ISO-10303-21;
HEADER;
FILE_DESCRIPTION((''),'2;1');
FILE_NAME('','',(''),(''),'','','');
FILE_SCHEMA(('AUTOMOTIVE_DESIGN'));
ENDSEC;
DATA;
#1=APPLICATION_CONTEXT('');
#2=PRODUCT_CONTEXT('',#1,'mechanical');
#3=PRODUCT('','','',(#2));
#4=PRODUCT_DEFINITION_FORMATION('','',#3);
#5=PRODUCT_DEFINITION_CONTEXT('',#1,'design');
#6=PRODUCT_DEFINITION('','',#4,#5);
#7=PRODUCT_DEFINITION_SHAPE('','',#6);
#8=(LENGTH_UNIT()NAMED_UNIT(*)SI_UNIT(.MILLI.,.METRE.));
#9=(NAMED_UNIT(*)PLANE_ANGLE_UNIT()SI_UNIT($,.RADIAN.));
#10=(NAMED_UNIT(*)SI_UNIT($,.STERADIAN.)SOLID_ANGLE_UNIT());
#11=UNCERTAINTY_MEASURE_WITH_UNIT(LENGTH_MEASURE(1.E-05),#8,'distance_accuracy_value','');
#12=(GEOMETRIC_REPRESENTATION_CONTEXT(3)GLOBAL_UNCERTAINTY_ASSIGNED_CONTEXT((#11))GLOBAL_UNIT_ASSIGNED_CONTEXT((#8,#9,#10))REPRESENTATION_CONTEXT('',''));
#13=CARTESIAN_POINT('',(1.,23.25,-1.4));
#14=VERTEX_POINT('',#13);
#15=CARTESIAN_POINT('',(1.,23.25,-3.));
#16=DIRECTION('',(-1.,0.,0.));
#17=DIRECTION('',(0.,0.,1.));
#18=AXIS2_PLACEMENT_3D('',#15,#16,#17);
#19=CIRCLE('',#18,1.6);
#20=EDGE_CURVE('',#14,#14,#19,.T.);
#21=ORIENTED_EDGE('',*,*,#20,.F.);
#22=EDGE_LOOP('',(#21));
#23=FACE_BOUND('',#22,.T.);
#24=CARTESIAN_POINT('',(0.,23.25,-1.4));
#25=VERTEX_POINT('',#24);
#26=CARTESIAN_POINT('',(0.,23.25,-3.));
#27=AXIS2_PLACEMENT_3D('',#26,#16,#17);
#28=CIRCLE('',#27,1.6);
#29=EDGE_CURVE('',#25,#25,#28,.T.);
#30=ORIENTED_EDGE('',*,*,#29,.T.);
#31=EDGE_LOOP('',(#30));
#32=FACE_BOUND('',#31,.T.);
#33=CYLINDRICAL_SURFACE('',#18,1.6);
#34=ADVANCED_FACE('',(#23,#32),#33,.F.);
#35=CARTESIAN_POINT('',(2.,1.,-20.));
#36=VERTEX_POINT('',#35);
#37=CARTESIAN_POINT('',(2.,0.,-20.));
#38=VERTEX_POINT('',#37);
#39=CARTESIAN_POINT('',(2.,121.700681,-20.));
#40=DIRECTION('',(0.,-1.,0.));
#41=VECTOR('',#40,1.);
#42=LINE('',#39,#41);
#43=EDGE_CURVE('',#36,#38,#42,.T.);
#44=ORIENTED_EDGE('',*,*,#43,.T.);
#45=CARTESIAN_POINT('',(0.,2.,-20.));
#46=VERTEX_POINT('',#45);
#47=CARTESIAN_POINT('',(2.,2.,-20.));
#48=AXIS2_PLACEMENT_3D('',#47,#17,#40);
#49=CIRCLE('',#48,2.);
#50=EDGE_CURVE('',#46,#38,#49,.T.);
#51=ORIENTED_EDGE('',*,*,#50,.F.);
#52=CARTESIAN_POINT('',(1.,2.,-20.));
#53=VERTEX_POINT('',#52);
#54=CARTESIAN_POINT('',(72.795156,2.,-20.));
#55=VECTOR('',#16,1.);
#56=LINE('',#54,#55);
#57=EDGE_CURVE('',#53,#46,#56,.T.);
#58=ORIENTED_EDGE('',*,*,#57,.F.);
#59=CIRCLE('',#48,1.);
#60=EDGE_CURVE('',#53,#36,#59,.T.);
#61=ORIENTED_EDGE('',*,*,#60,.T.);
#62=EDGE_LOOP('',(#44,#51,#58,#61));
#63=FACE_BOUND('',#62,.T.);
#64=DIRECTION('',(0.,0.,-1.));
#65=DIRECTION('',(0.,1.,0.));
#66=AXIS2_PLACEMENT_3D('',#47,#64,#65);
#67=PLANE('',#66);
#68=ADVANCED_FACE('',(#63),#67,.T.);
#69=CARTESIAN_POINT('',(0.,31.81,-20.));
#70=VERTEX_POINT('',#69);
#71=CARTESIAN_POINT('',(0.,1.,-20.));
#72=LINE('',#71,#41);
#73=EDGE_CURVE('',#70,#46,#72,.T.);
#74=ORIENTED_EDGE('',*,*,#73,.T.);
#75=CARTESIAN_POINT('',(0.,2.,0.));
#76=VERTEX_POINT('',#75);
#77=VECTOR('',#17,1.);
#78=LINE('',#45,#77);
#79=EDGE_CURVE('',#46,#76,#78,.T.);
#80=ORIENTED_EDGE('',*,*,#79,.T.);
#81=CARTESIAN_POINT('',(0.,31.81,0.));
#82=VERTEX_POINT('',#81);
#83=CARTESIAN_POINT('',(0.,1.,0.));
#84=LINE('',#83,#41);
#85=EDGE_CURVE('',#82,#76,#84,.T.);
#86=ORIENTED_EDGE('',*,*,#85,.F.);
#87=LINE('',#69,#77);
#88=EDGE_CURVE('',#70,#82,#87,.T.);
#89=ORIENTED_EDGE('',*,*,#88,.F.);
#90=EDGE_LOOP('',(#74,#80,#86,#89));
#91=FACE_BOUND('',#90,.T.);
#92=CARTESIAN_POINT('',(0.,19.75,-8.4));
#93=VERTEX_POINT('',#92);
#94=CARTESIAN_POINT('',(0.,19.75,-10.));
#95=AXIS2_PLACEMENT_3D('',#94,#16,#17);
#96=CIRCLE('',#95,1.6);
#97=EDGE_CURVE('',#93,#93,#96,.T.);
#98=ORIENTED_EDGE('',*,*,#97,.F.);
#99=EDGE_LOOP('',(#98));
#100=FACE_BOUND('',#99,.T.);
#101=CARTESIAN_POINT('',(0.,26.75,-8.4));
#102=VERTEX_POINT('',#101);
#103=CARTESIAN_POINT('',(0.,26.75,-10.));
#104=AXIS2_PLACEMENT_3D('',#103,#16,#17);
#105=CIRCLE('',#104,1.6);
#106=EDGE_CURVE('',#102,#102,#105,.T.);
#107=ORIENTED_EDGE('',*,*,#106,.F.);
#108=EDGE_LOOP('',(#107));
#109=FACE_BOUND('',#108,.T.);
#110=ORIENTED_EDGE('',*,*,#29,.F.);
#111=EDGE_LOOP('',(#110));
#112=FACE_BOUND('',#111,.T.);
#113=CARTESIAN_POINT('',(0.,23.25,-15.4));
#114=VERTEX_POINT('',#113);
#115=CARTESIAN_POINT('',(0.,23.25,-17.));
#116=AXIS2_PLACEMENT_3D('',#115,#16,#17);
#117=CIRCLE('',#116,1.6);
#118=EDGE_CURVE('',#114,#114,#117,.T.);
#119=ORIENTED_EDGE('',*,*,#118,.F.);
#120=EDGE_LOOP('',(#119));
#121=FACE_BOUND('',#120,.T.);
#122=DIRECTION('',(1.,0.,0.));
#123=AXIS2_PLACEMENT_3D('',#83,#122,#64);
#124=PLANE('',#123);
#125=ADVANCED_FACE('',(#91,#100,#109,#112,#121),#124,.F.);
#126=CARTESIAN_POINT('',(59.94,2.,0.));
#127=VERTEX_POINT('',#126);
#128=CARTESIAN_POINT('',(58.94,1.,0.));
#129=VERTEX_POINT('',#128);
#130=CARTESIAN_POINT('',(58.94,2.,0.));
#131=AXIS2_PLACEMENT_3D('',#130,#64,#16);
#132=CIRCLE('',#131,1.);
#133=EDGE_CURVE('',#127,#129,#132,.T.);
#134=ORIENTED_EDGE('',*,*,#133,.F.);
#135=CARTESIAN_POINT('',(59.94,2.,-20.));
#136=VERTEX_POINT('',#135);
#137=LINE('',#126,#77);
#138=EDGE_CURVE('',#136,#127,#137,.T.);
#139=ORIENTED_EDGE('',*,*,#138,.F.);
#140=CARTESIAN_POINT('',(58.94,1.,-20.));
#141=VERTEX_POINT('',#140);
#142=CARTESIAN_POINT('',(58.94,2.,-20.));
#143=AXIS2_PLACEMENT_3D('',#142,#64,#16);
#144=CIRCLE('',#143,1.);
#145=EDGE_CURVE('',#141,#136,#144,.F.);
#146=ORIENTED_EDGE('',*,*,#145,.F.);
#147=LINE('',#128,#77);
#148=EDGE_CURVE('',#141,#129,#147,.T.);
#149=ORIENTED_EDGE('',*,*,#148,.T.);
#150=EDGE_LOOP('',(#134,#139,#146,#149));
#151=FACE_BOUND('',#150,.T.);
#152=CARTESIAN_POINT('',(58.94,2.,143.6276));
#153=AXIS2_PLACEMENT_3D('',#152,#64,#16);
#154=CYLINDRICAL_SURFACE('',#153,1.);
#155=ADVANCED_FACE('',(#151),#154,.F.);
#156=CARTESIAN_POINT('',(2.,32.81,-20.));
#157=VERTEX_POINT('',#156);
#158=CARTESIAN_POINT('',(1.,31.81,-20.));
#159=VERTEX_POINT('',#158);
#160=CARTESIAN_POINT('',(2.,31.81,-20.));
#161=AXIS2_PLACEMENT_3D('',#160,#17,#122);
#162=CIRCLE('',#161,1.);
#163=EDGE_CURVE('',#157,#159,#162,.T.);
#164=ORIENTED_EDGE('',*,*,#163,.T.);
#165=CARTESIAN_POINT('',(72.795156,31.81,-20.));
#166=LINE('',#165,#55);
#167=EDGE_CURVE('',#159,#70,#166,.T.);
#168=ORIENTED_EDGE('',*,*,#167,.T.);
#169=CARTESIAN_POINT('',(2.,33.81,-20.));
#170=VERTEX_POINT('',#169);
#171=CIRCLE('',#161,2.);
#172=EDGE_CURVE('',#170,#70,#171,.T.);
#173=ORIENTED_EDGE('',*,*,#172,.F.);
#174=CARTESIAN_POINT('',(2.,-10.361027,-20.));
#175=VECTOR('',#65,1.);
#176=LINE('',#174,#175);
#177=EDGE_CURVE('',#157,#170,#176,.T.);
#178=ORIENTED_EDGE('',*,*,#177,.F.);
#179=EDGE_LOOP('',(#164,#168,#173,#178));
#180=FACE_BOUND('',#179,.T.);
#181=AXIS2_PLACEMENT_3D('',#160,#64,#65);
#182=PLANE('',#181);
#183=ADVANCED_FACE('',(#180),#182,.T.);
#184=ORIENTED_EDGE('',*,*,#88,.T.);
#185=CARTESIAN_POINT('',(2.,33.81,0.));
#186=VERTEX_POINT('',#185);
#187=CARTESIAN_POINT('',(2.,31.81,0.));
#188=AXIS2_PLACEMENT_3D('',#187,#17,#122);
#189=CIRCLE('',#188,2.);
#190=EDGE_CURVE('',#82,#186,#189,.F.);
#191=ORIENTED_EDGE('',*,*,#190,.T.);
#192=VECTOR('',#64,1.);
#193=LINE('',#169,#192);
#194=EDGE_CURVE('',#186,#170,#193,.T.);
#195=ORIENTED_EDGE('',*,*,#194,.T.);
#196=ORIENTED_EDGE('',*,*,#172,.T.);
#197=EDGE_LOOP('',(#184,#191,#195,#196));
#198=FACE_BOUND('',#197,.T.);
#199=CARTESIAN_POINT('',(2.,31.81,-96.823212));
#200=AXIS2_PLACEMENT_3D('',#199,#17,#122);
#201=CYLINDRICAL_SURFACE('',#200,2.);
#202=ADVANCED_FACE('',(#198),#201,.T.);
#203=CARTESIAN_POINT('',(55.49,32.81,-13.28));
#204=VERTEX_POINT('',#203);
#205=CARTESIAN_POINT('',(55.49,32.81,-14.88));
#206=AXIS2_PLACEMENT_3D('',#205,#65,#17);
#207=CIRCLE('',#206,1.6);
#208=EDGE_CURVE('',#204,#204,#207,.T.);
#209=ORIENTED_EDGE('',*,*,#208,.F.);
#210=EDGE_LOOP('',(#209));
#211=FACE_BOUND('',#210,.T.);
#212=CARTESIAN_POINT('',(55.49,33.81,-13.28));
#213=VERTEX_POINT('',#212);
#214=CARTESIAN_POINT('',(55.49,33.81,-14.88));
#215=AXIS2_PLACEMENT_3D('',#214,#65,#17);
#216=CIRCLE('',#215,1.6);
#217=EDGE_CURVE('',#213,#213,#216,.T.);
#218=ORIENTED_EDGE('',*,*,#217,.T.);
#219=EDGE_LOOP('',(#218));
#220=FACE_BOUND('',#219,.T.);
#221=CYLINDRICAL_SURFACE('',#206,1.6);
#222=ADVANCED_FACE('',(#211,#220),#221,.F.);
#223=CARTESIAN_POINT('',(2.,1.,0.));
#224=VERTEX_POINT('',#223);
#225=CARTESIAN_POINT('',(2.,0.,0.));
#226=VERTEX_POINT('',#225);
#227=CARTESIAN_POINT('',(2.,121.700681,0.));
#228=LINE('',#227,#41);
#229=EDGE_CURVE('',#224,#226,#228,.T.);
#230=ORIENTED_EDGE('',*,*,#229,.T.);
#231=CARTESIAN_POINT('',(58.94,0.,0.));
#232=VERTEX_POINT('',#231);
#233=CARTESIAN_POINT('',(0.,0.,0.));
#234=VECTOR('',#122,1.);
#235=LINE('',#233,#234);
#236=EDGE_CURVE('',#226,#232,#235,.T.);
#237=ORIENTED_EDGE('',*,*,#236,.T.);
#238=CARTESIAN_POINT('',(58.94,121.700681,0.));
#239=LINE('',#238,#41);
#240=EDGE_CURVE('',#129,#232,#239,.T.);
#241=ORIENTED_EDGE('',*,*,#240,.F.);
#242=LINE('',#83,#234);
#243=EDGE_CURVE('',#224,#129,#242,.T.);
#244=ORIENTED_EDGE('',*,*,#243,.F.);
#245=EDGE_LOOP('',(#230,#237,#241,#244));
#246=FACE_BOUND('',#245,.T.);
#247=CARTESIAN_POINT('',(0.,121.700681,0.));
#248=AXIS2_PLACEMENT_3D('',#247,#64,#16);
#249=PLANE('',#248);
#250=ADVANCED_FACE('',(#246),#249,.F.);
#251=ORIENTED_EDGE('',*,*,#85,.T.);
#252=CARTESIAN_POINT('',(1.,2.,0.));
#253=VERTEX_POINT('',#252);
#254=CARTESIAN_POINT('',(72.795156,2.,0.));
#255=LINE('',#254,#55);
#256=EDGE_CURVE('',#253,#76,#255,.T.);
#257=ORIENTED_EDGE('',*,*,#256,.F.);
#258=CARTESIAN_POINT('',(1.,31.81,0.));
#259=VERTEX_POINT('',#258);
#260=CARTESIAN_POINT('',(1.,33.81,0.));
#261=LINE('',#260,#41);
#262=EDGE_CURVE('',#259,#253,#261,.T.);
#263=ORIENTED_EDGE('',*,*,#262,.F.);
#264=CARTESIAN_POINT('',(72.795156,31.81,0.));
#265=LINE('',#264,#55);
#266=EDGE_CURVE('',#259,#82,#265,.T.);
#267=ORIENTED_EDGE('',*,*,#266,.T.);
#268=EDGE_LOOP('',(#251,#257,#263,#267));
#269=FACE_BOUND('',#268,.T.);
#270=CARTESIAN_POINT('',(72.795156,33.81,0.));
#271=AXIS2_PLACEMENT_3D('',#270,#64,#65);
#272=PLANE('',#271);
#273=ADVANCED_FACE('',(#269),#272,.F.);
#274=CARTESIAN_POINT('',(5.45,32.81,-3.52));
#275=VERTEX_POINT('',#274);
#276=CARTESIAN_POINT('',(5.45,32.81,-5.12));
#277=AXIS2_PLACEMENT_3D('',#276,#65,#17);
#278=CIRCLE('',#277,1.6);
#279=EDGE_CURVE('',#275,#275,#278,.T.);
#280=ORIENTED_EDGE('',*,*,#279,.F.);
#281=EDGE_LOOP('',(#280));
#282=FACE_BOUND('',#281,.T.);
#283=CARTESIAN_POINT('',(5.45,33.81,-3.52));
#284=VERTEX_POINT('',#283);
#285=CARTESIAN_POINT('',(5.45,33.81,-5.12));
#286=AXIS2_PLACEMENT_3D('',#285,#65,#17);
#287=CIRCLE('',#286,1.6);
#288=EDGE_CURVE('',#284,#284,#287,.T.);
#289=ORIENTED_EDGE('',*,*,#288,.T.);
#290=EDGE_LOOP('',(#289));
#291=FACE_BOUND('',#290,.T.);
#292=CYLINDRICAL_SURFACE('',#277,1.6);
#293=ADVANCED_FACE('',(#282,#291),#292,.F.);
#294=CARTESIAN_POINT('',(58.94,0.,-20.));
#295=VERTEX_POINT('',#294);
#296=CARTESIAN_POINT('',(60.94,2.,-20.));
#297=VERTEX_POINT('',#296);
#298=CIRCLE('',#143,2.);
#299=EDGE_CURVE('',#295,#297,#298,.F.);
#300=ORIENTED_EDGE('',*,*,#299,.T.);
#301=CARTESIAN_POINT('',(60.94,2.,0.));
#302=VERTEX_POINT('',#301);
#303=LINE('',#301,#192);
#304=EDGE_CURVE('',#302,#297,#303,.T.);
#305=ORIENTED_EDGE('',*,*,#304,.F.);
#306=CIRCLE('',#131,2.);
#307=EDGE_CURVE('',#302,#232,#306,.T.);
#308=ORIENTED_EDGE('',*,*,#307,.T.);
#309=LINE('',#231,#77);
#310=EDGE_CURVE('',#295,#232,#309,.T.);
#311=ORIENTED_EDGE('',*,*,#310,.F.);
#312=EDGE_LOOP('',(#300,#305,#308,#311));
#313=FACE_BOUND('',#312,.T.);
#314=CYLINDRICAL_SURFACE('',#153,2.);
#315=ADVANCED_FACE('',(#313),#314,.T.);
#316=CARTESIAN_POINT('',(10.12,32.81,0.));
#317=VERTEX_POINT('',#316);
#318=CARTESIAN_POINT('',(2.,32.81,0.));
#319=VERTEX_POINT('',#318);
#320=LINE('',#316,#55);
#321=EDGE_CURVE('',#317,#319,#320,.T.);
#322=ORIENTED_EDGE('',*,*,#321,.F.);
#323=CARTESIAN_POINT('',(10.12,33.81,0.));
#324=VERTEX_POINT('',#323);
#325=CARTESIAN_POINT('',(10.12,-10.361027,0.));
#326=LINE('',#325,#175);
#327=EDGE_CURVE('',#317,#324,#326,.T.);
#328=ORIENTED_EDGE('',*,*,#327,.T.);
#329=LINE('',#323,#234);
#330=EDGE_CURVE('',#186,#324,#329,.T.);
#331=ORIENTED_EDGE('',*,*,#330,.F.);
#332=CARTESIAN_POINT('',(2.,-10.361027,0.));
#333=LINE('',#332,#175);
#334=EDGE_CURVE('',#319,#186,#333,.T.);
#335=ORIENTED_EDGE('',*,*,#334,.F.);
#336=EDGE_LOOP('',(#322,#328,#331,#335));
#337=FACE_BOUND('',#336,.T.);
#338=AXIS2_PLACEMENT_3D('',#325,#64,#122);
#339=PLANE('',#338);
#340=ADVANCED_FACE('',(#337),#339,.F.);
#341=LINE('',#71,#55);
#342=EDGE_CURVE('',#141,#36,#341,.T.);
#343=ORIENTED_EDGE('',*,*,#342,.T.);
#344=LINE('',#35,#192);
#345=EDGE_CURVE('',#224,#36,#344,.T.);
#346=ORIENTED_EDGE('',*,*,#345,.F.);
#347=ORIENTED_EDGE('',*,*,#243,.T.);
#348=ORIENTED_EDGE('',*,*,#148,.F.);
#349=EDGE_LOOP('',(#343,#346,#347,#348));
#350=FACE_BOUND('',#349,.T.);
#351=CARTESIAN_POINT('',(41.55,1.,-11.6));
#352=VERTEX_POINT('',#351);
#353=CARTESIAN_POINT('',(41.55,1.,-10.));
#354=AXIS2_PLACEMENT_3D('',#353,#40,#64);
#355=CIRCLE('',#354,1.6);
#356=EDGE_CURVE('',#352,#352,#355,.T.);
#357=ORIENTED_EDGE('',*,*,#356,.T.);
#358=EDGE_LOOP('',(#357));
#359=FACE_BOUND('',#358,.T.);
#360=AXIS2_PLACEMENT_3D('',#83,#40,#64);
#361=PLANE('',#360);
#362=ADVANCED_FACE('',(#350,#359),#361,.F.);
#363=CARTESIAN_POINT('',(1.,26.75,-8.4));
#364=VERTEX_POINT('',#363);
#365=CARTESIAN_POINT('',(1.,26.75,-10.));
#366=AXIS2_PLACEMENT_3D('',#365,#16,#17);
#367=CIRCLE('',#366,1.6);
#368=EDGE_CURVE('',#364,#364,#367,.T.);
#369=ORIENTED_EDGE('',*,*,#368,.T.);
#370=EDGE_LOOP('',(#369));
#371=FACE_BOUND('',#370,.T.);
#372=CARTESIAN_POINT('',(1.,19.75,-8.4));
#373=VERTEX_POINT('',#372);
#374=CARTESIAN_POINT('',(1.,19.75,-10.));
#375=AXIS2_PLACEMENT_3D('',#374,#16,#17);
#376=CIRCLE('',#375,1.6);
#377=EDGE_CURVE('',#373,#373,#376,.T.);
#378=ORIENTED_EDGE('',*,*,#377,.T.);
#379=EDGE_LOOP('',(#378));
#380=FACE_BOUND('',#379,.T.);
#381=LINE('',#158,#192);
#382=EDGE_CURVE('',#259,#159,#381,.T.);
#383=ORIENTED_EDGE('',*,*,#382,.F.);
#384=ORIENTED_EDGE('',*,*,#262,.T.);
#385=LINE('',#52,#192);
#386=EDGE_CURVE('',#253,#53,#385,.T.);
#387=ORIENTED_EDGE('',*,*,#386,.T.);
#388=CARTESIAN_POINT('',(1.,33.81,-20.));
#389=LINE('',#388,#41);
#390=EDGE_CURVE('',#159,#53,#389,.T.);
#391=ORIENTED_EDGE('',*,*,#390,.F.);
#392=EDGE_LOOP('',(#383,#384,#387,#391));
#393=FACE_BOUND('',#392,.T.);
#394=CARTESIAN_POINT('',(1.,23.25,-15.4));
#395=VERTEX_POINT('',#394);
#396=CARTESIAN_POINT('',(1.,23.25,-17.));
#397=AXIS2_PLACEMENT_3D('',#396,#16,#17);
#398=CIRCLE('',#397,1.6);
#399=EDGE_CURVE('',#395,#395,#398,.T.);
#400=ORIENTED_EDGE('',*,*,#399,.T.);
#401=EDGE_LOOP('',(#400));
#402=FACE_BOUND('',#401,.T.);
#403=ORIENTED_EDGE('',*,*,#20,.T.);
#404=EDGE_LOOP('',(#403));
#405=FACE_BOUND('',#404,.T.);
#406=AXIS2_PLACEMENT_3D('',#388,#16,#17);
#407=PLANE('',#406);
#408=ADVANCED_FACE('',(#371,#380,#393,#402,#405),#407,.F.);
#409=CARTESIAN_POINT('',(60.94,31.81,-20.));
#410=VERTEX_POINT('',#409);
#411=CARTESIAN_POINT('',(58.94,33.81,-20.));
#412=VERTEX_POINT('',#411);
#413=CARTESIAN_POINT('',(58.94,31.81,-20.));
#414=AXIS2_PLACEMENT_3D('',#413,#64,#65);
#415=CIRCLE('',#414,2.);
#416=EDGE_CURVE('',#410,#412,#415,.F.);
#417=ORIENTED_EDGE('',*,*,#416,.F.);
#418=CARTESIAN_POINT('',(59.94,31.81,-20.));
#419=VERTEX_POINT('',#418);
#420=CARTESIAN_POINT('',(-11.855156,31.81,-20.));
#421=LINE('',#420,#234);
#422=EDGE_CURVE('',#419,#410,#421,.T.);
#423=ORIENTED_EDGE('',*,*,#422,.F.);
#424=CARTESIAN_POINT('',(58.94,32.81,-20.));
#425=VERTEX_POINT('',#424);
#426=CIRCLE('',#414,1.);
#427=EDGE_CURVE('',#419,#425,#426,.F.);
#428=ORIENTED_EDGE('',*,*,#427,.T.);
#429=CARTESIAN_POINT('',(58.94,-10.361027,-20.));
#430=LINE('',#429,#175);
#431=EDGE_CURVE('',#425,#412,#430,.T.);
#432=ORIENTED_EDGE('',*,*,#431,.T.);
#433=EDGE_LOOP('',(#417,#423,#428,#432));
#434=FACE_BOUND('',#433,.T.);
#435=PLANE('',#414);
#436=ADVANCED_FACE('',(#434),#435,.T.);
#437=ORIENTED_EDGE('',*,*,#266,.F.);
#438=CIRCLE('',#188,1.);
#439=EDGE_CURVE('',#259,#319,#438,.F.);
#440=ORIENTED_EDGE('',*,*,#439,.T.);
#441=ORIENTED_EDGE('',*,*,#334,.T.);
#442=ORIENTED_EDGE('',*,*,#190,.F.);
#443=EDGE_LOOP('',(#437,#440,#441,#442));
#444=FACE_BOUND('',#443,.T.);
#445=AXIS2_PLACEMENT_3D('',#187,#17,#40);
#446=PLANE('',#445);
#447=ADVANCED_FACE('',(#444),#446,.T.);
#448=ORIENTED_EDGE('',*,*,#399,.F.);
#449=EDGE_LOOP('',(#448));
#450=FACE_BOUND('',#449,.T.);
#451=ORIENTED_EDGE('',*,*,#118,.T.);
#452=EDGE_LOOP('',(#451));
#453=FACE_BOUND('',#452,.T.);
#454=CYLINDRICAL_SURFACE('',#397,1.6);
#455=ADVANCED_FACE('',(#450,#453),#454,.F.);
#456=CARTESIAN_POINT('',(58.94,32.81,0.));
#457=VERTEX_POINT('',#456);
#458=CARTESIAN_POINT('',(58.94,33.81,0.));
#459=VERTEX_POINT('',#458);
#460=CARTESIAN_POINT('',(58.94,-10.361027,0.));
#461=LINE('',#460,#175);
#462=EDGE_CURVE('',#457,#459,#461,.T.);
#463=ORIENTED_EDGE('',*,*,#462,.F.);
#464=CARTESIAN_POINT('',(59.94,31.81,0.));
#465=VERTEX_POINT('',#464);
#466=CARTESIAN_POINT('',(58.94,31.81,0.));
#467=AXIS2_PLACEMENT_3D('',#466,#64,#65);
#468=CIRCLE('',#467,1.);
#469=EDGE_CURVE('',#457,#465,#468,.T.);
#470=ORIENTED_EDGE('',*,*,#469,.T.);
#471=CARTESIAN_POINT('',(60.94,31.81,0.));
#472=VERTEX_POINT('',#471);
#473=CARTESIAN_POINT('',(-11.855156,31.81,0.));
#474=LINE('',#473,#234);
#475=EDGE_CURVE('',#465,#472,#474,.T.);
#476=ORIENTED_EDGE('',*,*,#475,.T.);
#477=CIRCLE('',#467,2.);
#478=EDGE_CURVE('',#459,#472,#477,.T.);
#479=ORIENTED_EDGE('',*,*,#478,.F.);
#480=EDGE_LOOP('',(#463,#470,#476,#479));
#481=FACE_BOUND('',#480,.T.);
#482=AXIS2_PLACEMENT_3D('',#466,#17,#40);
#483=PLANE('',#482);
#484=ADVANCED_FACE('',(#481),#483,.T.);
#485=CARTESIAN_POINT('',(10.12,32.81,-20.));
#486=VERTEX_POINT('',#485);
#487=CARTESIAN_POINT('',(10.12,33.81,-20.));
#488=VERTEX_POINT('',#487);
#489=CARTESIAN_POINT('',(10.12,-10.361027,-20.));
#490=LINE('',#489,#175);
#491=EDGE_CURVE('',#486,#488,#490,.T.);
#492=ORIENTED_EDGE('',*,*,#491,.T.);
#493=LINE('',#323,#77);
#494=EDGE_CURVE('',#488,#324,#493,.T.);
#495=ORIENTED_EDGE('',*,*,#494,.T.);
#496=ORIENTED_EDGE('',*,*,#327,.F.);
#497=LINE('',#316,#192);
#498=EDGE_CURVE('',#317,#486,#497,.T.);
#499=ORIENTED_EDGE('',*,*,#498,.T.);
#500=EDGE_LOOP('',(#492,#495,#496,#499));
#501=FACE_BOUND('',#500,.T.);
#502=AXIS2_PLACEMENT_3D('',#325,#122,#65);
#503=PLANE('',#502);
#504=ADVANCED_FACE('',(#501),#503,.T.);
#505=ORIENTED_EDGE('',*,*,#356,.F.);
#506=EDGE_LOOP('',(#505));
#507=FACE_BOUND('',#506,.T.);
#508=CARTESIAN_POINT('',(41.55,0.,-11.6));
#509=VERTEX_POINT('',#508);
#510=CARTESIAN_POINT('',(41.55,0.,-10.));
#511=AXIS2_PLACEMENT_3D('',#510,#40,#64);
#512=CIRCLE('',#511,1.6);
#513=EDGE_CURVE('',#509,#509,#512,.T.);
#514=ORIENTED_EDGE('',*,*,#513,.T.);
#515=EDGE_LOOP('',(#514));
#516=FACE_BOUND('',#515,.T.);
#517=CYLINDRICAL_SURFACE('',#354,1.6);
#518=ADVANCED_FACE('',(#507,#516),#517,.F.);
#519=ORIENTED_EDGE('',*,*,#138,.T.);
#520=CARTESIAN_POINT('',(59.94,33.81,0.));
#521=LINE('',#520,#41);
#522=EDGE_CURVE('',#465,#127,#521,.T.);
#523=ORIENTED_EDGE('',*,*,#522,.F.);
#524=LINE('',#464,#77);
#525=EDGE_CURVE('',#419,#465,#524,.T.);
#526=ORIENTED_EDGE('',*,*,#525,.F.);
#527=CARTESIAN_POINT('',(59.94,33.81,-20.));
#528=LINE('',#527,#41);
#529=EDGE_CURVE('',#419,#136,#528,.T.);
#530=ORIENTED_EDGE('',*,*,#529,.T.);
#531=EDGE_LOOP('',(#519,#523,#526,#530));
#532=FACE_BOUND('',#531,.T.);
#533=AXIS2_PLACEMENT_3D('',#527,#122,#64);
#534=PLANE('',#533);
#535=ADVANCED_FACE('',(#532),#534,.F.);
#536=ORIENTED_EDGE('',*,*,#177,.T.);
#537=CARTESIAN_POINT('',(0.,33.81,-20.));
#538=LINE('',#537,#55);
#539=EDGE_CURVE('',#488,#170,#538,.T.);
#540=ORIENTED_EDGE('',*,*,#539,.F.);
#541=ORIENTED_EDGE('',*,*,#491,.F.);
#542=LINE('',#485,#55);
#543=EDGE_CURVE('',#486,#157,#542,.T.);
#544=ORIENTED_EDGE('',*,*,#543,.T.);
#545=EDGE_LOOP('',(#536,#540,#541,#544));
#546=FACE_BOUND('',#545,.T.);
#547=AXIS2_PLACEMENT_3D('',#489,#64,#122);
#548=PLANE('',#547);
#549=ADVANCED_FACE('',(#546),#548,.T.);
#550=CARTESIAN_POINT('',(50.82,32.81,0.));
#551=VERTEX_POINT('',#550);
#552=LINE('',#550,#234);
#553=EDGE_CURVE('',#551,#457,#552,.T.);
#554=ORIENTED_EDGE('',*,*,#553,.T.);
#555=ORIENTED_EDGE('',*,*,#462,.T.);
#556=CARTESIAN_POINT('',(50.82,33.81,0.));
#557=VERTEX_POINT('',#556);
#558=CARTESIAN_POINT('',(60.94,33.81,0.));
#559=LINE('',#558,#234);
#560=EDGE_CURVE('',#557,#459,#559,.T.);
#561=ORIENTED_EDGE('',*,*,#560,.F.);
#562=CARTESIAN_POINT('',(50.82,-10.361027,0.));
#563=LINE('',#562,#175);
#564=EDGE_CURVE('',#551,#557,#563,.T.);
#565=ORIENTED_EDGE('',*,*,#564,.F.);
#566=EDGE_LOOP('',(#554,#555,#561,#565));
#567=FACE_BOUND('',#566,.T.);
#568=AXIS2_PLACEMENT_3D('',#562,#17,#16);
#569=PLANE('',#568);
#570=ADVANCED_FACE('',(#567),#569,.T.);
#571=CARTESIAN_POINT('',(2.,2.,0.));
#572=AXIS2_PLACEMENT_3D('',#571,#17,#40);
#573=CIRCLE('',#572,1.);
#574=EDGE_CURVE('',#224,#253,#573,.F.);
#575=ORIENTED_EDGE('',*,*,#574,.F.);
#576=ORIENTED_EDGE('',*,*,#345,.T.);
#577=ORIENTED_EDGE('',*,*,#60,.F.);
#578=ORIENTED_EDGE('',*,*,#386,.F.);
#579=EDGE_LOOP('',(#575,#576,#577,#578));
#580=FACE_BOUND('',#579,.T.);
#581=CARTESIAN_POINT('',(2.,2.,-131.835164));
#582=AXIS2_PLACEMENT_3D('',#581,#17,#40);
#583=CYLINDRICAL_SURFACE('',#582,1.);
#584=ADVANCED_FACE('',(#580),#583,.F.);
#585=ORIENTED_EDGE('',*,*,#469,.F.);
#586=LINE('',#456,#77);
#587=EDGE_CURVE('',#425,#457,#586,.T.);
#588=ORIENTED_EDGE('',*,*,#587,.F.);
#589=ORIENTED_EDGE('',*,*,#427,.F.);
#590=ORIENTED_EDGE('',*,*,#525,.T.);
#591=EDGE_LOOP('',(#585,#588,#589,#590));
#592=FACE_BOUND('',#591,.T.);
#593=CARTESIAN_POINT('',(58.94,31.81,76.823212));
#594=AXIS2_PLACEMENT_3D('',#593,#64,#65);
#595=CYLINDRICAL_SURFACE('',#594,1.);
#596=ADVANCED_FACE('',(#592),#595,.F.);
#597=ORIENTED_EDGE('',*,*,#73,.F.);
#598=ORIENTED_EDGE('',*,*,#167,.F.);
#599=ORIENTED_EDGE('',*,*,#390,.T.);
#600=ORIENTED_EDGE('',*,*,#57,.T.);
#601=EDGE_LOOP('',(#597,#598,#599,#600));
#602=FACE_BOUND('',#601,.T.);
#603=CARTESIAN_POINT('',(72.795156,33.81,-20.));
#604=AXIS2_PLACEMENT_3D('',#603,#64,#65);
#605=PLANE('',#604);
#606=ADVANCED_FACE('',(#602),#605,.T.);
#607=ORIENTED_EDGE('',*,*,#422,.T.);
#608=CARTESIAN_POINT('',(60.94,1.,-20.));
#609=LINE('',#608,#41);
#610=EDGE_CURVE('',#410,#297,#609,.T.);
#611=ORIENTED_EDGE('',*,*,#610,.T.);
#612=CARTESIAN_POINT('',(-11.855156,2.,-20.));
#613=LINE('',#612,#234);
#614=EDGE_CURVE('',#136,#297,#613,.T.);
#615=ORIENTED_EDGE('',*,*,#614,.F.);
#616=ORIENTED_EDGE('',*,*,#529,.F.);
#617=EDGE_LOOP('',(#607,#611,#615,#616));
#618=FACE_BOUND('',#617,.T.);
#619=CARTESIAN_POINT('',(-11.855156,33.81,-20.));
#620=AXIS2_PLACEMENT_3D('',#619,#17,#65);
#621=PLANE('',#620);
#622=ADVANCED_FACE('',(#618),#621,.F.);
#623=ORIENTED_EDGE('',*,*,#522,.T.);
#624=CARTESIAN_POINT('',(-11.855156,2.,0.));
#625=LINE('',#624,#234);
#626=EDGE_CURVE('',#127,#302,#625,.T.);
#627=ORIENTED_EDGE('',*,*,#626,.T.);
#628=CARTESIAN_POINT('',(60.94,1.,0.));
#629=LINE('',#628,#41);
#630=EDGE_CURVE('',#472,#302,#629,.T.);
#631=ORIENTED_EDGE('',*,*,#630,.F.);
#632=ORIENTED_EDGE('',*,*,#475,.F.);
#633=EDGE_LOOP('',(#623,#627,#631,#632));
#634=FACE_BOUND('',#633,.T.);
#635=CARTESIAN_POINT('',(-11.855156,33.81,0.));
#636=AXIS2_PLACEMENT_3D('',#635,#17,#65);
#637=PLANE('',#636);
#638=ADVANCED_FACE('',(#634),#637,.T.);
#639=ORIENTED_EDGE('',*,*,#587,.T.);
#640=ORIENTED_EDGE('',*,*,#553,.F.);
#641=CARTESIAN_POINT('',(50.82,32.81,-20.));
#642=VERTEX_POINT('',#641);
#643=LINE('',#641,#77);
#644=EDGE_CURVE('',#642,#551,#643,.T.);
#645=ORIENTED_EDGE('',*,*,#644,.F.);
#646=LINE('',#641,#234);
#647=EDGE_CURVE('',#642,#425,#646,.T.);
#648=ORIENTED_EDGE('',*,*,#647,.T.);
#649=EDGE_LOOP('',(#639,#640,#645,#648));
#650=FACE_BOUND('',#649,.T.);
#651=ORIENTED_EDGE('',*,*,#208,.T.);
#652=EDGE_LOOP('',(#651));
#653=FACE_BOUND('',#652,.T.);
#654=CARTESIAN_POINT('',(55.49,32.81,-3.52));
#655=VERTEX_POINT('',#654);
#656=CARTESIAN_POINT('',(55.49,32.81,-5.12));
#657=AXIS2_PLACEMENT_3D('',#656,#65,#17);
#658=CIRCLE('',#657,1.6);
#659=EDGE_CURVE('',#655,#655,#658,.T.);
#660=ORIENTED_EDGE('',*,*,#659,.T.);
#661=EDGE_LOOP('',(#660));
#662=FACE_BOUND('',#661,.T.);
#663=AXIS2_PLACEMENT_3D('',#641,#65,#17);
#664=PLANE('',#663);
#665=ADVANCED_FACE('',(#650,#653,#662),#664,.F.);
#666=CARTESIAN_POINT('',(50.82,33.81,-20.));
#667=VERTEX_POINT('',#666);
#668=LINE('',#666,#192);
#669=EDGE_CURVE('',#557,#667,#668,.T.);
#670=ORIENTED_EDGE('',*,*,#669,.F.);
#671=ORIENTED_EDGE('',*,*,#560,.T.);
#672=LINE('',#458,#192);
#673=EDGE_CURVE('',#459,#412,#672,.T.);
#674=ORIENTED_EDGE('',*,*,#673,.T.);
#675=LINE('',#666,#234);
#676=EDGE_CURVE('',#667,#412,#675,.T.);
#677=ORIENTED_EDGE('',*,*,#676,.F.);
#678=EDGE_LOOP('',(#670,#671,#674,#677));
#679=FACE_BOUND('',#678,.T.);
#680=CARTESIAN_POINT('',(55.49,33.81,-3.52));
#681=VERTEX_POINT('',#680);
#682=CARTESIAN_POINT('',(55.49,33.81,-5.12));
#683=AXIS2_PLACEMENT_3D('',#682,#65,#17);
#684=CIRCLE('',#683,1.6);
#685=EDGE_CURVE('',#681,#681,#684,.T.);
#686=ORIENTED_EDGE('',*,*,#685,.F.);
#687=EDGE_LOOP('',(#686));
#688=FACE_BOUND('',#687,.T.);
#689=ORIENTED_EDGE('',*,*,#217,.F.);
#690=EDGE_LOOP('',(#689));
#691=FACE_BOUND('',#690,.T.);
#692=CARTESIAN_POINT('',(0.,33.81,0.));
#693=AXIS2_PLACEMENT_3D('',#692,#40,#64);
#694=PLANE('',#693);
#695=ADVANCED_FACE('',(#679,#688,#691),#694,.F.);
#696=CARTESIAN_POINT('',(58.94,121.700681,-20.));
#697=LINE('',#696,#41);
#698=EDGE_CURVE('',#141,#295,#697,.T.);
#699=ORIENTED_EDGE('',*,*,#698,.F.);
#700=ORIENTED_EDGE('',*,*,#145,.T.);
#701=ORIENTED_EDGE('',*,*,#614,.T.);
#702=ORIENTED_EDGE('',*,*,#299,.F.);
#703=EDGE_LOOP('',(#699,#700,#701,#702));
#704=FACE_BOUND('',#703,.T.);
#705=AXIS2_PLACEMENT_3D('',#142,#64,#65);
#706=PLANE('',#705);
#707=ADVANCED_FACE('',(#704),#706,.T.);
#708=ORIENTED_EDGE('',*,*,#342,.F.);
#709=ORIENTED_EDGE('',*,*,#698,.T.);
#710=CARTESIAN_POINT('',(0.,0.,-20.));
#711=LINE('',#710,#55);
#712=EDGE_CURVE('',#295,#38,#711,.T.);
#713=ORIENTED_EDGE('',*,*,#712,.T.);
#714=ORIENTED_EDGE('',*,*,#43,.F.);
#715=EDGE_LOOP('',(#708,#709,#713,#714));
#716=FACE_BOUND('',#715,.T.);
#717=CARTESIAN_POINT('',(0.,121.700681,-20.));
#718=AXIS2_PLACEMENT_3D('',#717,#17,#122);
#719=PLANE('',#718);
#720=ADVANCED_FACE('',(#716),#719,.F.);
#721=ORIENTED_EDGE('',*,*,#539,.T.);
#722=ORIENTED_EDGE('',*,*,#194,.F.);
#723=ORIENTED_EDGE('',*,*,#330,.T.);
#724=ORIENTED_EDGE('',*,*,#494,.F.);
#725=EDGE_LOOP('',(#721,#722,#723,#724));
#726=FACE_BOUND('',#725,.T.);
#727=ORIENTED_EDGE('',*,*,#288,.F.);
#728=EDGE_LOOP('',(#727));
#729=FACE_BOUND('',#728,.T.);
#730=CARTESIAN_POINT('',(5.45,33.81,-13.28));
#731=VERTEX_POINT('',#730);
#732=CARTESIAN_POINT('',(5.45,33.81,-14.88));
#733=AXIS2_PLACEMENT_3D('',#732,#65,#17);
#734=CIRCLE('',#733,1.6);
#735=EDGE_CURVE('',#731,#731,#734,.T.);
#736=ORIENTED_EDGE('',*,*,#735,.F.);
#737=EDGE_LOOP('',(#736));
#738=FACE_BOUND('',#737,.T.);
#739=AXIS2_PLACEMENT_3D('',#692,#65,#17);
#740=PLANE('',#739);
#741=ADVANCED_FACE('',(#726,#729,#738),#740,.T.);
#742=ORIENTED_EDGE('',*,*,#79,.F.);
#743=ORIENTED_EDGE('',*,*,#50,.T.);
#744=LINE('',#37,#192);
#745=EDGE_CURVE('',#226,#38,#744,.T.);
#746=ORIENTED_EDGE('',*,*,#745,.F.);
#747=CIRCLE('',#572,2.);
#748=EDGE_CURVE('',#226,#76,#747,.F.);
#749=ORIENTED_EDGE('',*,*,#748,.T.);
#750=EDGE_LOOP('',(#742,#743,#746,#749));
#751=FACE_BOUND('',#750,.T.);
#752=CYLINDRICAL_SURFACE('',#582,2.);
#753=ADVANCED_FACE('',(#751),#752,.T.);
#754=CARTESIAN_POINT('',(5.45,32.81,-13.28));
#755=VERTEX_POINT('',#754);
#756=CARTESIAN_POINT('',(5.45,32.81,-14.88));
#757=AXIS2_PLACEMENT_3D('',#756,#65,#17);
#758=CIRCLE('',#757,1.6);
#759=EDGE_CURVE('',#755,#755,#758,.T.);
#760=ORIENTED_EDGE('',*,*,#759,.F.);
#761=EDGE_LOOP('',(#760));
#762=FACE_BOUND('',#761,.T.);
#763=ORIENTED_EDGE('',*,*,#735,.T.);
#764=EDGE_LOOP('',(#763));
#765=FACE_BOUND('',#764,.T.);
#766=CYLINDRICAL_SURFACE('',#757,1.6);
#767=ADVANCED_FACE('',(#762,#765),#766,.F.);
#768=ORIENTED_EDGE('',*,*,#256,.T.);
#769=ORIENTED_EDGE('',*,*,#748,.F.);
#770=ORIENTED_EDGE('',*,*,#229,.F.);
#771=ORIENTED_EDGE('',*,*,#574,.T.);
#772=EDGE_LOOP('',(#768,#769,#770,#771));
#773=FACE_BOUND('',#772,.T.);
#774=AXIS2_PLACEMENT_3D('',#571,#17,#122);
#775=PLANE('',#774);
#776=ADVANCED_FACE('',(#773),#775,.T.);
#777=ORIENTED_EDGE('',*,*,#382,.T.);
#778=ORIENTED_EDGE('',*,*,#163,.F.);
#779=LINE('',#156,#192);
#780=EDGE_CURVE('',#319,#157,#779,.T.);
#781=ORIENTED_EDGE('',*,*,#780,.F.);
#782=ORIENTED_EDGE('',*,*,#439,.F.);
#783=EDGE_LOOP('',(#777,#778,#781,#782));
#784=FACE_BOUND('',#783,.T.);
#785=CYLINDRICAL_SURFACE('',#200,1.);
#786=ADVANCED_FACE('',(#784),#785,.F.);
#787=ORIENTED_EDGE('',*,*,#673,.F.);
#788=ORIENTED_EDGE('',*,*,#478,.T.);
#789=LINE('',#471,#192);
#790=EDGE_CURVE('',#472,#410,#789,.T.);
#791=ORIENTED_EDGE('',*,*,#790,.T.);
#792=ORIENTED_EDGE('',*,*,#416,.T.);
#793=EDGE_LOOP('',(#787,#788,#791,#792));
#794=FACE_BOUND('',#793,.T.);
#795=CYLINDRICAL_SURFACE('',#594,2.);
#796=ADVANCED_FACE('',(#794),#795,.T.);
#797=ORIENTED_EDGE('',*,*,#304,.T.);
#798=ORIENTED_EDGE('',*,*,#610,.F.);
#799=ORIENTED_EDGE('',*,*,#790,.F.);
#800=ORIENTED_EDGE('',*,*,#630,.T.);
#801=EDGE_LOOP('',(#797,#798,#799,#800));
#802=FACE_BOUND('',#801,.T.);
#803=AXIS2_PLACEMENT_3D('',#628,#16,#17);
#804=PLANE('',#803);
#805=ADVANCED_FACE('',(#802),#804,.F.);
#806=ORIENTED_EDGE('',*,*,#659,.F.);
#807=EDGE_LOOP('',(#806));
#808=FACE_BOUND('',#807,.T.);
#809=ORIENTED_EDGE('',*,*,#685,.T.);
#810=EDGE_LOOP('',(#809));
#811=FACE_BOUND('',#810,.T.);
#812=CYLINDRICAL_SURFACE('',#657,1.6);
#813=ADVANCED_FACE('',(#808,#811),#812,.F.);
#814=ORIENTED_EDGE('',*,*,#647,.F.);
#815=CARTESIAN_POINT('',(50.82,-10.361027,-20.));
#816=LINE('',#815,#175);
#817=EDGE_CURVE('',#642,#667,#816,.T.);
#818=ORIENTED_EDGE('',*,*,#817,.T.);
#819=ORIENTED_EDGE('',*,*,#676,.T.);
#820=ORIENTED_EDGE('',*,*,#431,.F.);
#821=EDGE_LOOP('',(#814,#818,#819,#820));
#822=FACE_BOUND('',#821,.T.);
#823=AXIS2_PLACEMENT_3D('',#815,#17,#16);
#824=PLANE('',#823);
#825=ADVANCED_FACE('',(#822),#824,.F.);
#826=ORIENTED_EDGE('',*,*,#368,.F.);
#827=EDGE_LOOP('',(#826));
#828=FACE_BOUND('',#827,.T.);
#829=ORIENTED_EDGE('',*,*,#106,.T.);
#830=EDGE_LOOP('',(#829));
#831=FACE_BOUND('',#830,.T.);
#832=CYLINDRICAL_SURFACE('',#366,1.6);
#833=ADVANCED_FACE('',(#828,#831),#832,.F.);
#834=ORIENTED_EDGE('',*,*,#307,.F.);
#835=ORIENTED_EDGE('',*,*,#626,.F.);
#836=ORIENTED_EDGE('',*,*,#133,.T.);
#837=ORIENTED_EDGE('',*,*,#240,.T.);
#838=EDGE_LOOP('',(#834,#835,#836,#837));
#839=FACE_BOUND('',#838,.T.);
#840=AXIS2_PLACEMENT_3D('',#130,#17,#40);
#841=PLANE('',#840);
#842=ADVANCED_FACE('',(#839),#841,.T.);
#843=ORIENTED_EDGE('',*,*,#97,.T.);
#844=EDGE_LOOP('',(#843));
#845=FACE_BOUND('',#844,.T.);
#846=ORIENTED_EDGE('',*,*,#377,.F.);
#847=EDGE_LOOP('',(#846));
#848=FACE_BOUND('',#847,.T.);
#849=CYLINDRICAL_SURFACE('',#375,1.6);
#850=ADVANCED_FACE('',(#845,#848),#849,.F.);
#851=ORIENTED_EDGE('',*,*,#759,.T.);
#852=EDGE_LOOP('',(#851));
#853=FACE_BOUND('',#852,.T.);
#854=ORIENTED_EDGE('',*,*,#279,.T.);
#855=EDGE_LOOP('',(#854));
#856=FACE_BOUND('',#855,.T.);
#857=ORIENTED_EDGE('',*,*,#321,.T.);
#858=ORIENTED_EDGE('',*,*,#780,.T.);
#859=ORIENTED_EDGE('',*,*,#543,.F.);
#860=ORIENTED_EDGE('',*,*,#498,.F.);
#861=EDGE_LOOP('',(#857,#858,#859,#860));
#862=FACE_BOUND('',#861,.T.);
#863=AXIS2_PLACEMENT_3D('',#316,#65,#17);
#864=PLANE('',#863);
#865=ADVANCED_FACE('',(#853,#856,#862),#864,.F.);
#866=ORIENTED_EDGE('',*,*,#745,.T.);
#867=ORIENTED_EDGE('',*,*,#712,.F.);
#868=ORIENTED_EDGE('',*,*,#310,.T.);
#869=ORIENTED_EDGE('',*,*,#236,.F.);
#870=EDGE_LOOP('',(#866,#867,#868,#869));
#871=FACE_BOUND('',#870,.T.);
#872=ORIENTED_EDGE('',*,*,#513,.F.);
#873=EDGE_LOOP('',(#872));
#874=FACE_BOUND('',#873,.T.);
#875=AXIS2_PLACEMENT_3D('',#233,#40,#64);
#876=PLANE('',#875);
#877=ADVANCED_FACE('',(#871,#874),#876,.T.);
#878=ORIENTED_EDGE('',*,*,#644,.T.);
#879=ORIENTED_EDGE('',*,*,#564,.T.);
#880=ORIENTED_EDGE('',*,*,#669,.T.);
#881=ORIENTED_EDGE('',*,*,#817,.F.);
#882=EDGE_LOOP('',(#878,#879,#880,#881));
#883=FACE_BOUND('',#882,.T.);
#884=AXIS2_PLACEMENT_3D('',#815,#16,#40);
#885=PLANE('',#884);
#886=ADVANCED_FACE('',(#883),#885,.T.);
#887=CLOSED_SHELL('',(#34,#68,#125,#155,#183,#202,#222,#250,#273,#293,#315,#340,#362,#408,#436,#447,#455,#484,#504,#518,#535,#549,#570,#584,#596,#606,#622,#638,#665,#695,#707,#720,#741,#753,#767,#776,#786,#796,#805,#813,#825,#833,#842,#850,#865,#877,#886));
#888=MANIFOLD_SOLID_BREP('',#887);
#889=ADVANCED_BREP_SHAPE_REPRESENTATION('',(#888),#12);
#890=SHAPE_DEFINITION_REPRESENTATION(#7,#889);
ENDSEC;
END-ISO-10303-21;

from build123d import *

# Parameters (mm, degrees)
SKETCH_2_W                = 60.94
SKETCH_2_H                = 20
EXTRUDE_1_DEPTH           = 1
SKETCH_3_W                = 1
SKETCH_3_H                = 20
EXTRUDE_2_DEPTH           = 32.81
SKETCH_4_W                = 1
SKETCH_4_H                = 20
EXTRUDE_3_DEPTH           = 32.81
SKETCH_9_W                = 20
SKETCH_9_H                = 1
EXTRUDE_8_DEPTH           = 9.12
SKETCH_10_W               = 20
SKETCH_10_H               = 1
EXTRUDE_9_DEPTH           = 9.12
SKETCH_13_R               = 1.6
CUT_EXTRUDE_2_DEPTH       = 1
SKETCH_14_R               = 1.6
CUT_EXTRUDE_3_DEPTH       = 1
SKETCH_15_R               = 1.6
CUT_EXTRUDE_4_DEPTH       = 1
SKETCH_16_R               = 1.6
CUT_EXTRUDE_5_DEPTH       = 1
SKETCH_17_R               = 1.6
CUT_EXTRUDE_6_DEPTH       = 1
SKETCH_19_R               = 1.6
CUT_EXTRUDE_7_DEPTH       = 1
SKETCH_20_R               = 1.6
CUT_EXTRUDE_8_DEPTH       = 1
SKETCH_22_R               = 1.6
CUT_EXTRUDE_9_DEPTH       = 1
SKETCH_23_R               = 1.6
CUT_EXTRUDE_10_DEPTH      = 1
SHEET_START               = 1
SHEET_METAL_1_OUTLINE_W   = 10.12
SHEET_METAL_1_OUTLINE_H   = 20
SHEET_METAL_1_OUTLINE_R   = 1.6
SHEET_METAL_1_DEPTH       = 32.81
SHEET_METAL_1_2_OUTLINE_W = 40.64238898
SHEET_METAL_1_2_OUTLINE_H = 20
SHEET_METAL_1_2_OUTLINE_R = 1.6
SHEET_METAL_1_2_DEPTH     = 1
SHEET_START_2             = -20
SHEET_METAL_1_3_DEPTH     = 20
SHEET_METAL_1_3_2_DEPTH   = 20


with BuildPart() as part:
    # Sketch 2 → ﾎﾞｽ - 押し出し1 (new body)
    with BuildSketch(Plane(origin=(0, 0, 0), x_dir=(1, 0, 0), z_dir=(0, 1, 0))):
        with Locations((30.47, 10)):
            Rectangle(SKETCH_2_W, SKETCH_2_H)
    extrude(amount=EXTRUDE_1_DEPTH)

    # ｽｹｯﾁ3 → ﾎﾞｽ - 押し出し2 (add)
    with BuildSketch(Plane(origin=(0, 1, 0), x_dir=(1, 0, 0), z_dir=(0, 1, 0))):
        with Locations((60.44, 10)):
            Rectangle(SKETCH_3_W, SKETCH_3_H)
    extrude(amount=EXTRUDE_2_DEPTH)

    # ｽｹｯﾁ4 → ﾎﾞｽ - 押し出し3 (add)
    with BuildSketch(Plane(origin=(0, 1, 0), x_dir=(1, 0, 0), z_dir=(0, 1, 0))):
        with Locations((0.5, 10)):
            Rectangle(SKETCH_4_W, SKETCH_4_H)
    extrude(amount=EXTRUDE_3_DEPTH)

    # ｽｹｯﾁ9 → ﾎﾞｽ - 押し出し8 (add)
    with BuildSketch(Plane.ZY.offset(-59.94)):
        with Locations((-10, 33.31)):
            Rectangle(SKETCH_9_W, SKETCH_9_H)
    extrude(amount=EXTRUDE_8_DEPTH)

    # ｽｹｯﾁ10 → ﾎﾞｽ - 押し出し9 (add)
    with BuildSketch(Plane(origin=(1, 0, 0), x_dir=(0, 0, -1), z_dir=(1, 0, 0))):
        with Locations((10, 33.31)):
            Rectangle(SKETCH_10_W, SKETCH_10_H)
    extrude(amount=EXTRUDE_9_DEPTH)

    # ｽｹｯﾁ13 → ｶｯﾄ - 押し出し2 (cut)
    with BuildSketch(Plane(origin=(0, 33.81, 0), x_dir=(1, 0, 0), z_dir=(0, 1, 0))):
        with Locations(Location((55.49, 5.12, 0), (0, 0, 270))):
            Circle(SKETCH_13_R)
    extrude(amount=-CUT_EXTRUDE_2_DEPTH, mode=Mode.SUBTRACT)

    # ｽｹｯﾁ14 → ｶｯﾄ - 押し出し3 (cut)
    with BuildSketch(Plane(origin=(0, 33.81, 0), x_dir=(1, 0, 0), z_dir=(0, 1, 0))):
        with Locations(Location((55.49, 14.88, 0), (0, 0, 270))):
            Circle(SKETCH_14_R)
    extrude(amount=-CUT_EXTRUDE_3_DEPTH, mode=Mode.SUBTRACT)

    # ｽｹｯﾁ15 → ｶｯﾄ - 押し出し4 (cut)
    with BuildSketch(Plane(origin=(0, 33.81, 0), x_dir=(1, 0, 0), z_dir=(0, 1, 0))):
        with Locations(Location((5.45, 5.12, 0), (0, 0, 270))):
            Circle(SKETCH_15_R)
    extrude(amount=-CUT_EXTRUDE_4_DEPTH, mode=Mode.SUBTRACT)

    # ｽｹｯﾁ16 → ｶｯﾄ - 押し出し5 (cut)
    with BuildSketch(Plane(origin=(0, 33.81, 0), x_dir=(1, 0, 0), z_dir=(0, 1, 0))):
        with Locations(Location((5.45, 14.88, 0), (0, 0, 270))):
            Circle(SKETCH_16_R)
    extrude(amount=-CUT_EXTRUDE_5_DEPTH, mode=Mode.SUBTRACT)

    # ｽｹｯﾁ17 → ｶｯﾄ - 押し出し6 (cut)
    with BuildSketch(Plane(origin=(0, 0, 0), x_dir=(-1, 0, 0), z_dir=(0, -1, 0))):
        with Locations(Location((-41.55, 10, 0), (0, 0, 90))):
            Circle(SKETCH_17_R)
    extrude(amount=-CUT_EXTRUDE_6_DEPTH, mode=Mode.SUBTRACT)

    # ｽｹｯﾁ19 → ｶｯﾄ - 押し出し7 (cut)
    with BuildSketch(Plane.ZY):
        with Locations((-3, 23.25)):
            Circle(SKETCH_19_R)
    extrude(amount=-CUT_EXTRUDE_7_DEPTH, mode=Mode.SUBTRACT)

    # ｽｹｯﾁ20 → ｶｯﾄ - 押し出し8 (cut)
    with BuildSketch(Plane.ZY):
        with Locations((-17, 23.25)):
            Circle(SKETCH_20_R)
    extrude(amount=-CUT_EXTRUDE_8_DEPTH, mode=Mode.SUBTRACT)

    # ｽｹｯﾁ22 → ｶｯﾄ - 押し出し9 (cut)
    with BuildSketch(Plane.ZY):
        with Locations((-10, 19.75)):
            Circle(SKETCH_22_R)
    extrude(amount=-CUT_EXTRUDE_9_DEPTH, mode=Mode.SUBTRACT)

    # ｽｹｯﾁ23 → ｶｯﾄ - 押し出し10 (cut)
    with BuildSketch(Plane.ZY):
        with Locations((-10, 26.75)):
            Circle(SKETCH_23_R)
    extrude(amount=-CUT_EXTRUDE_10_DEPTH, mode=Mode.SUBTRACT)

    # Sheet Metal 1: read off the stored shape, not the designer's step
    # Sheet Metal 1 outline → Sheet Metal 1 (cut)
    # profile 1 of 2: a face of its own
    with BuildSketch(Plane(origin=(0, 0, 0), x_dir=(1, 0, 0), z_dir=(0, 1, 0)).offset(SHEET_START)):
        with Locations((55.88, 10)):
            Rectangle(SHEET_METAL_1_OUTLINE_W, SHEET_METAL_1_OUTLINE_H)
        with Locations((55.49, 14.88)):
            Circle(SHEET_METAL_1_OUTLINE_R, mode=Mode.SUBTRACT)
        with Locations((55.49, 5.12)):
            Circle(SHEET_METAL_1_OUTLINE_R, mode=Mode.SUBTRACT)
    # profile 2 of 2: a face of its own
    with BuildSketch(Plane(origin=(0, 0, 0), x_dir=(1, 0, 0), z_dir=(0, 1, 0)).offset(SHEET_START)):
        with Locations((5.06, 10)):
            Rectangle(SHEET_METAL_1_OUTLINE_W, SHEET_METAL_1_OUTLINE_H)
        with Locations((5.45, 5.12)):
            Circle(SHEET_METAL_1_OUTLINE_R, mode=Mode.SUBTRACT)
        with Locations((5.45, 14.88)):
            Circle(SHEET_METAL_1_OUTLINE_R, mode=Mode.SUBTRACT)
    extrude(amount=SHEET_METAL_1_DEPTH, mode=Mode.SUBTRACT)

    # Sheet Metal 1 2 outline → Sheet Metal 1 2 (add)
    # profile 1 of 2: a face of its own
    with BuildSketch(Plane(origin=(0, 0, 0), x_dir=(1, 0, 0), z_dir=(0, 1, 0))):
        with Locations((81.26119449, 10)):
            Rectangle(SHEET_METAL_1_2_OUTLINE_W, SHEET_METAL_1_2_OUTLINE_H)
        with Locations((96.91238898, 5.12)):
            Circle(SHEET_METAL_1_2_OUTLINE_R, mode=Mode.SUBTRACT)
        with Locations((96.91238898, 14.88)):
            Circle(SHEET_METAL_1_2_OUTLINE_R, mode=Mode.SUBTRACT)
    # profile 2 of 2: a face of its own
    with BuildSketch(Plane(origin=(0, 0, 0), x_dir=(1, 0, 0), z_dir=(0, 1, 0))):
        with Locations((-20.32119449, 10)):
            Rectangle(SHEET_METAL_1_2_OUTLINE_W, SHEET_METAL_1_2_OUTLINE_H)
        with Locations((-21.60619449, 3)):
            Circle(SHEET_METAL_1_2_OUTLINE_R, mode=Mode.SUBTRACT)
        with Locations((-35.97238898, 5.12)):
            Circle(SHEET_METAL_1_2_OUTLINE_R, mode=Mode.SUBTRACT)
        with Locations((-25.10619449, 10)):
            Circle(SHEET_METAL_1_2_OUTLINE_R, mode=Mode.SUBTRACT)
        with Locations((-18.10619449, 10)):
            Circle(SHEET_METAL_1_2_OUTLINE_R, mode=Mode.SUBTRACT)
        with Locations((-35.97238898, 14.88)):
            Circle(SHEET_METAL_1_2_OUTLINE_R, mode=Mode.SUBTRACT)
        with Locations((-21.60619449, 17)):
            Circle(SHEET_METAL_1_2_OUTLINE_R, mode=Mode.SUBTRACT)
    extrude(amount=SHEET_METAL_1_2_DEPTH)

    # Sheet Metal 1 3: read off the stored shape, not the designer's step
    # Sheet Metal 1 3 outline → Sheet Metal 1 3 (cut)
    with BuildSketch(Plane.XY.offset(SHEET_START_2)):
        with BuildLine():
            ThreePointArc((2, 0), (1, 0.267949193), (0.267949193, 1))
            Line((0.267949193, 1), (-40.64238898, 1))
            Line((-40.64238898, 1), (-40.64238898, 0))
            Line((-40.64238898, 0), (2, 0))
        make_face()
        with BuildLine():
            Line((101.58238898, 1), (60.672050807, 1))
            ThreePointArc((60.672050807, 1), (59.94, 0.267949193), (58.94, 0))
            Line((58.94, 0), (101.58238898, 0))
            Line((101.58238898, 0), (101.58238898, 1))
        make_face()
    extrude(amount=SHEET_METAL_1_3_DEPTH, mode=Mode.SUBTRACT)

    # Sheet Metal 1 3 2 outline → Sheet Metal 1 3 2 (add)
    with BuildSketch(Plane.XY.offset(SHEET_START_2)):
        with BuildLine():
            Line((2, 32.81), (10.12, 32.81))
            Line((10.12, 32.81), (10.12, 33.81))
            Line((10.12, 33.81), (2, 33.81))
            ThreePointArc((2, 33.81), (0.585786438, 33.224213562), (0, 31.81))
            Line((0, 31.81), (0, 2))
            ThreePointArc((0, 2), (0.068148348, 1.48236191), (0.267949193, 1))
            Line((0.267949193, 1), (2, 1))
            ThreePointArc((2, 1), (1.292893219, 1.292893219), (1, 2))
            Line((1, 2), (1, 31.81))
            ThreePointArc((1, 31.81), (1.292893219, 32.517106781), (2, 32.81))
        make_face()
        with BuildLine():
            Line((58.94, 33.81), (50.82, 33.81))
            Line((50.82, 33.81), (50.82, 32.81))
            Line((50.82, 32.81), (58.94, 32.81))
            ThreePointArc((58.94, 32.81), (59.647106781, 32.517106781), (59.94, 31.81))
            Line((59.94, 31.81), (59.94, 2))
            ThreePointArc((59.94, 2), (59.647106781, 1.292893219), (58.94, 1))
            Line((58.94, 1), (60.672050807, 1))
            ThreePointArc((60.672050807, 1), (60.871851652, 1.48236191), (60.94, 2))
            Line((60.94, 2), (60.94, 31.81))
            ThreePointArc((60.94, 31.81), (60.354213562, 33.224213562), (58.94, 33.81))
        make_face()
    extrude(amount=SHEET_METAL_1_3_2_DEPTH)

    # Sheet Metal 1 3 3: loft between two sections, ruled curve by curve
    sheet_metal_1_3_3_from = [
        Edge.make_three_point_arc((5.45, 32.81, -3.52), (7.05, 32.81, -5.12), (5.45, 32.81, -6.72)),
        Edge.make_three_point_arc((5.45, 32.81, -6.72), (3.85, 32.81, -5.12), (5.45, 32.81, -3.52)),
    ]
    sheet_metal_1_3_3_to = [
        Edge.make_three_point_arc((5.45, 33.81, -3.52), (7.05, 33.81, -5.12), (5.45, 33.81, -6.72)),
        Edge.make_three_point_arc((5.45, 33.81, -6.72), (3.85, 33.81, -5.12), (5.45, 33.81, -3.52)),
    ]
    sheet_metal_1_3_3 = Solid(Shell([*[Face.make_surface_from_curves(sheet_metal_1_3_3_from[k], sheet_metal_1_3_3_to[k]) for k in range(2)], Face(Wire(sheet_metal_1_3_3_from)), Face(Wire(sheet_metal_1_3_3_to))]))
    add(sheet_metal_1_3_3, mode=Mode.SUBTRACT)

    # Sheet Metal 1 3 4: loft between two sections, ruled curve by curve
    sheet_metal_1_3_4_from = [
        Edge.make_three_point_arc((5.45, 32.81, -13.28), (7.05, 32.81, -14.88), (5.45, 32.81, -16.48)),
        Edge.make_three_point_arc((5.45, 32.81, -16.48), (3.85, 32.81, -14.88), (5.45, 32.81, -13.28)),
    ]
    sheet_metal_1_3_4_to = [
        Edge.make_three_point_arc((5.45, 33.81, -13.28), (7.05, 33.81, -14.88), (5.45, 33.81, -16.48)),
        Edge.make_three_point_arc((5.45, 33.81, -16.48), (3.85, 33.81, -14.88), (5.45, 33.81, -13.28)),
    ]
    sheet_metal_1_3_4 = Solid(Shell([*[Face.make_surface_from_curves(sheet_metal_1_3_4_from[k], sheet_metal_1_3_4_to[k]) for k in range(2)], Face(Wire(sheet_metal_1_3_4_from)), Face(Wire(sheet_metal_1_3_4_to))]))
    add(sheet_metal_1_3_4, mode=Mode.SUBTRACT)

    # Sheet Metal 1 3 5: loft between two sections, ruled curve by curve
    sheet_metal_1_3_5_from = [
        Edge.make_three_point_arc((55.49, 32.81, -3.52), (57.09, 32.81, -5.12), (55.49, 32.81, -6.72)),
        Edge.make_three_point_arc((55.49, 32.81, -6.72), (53.89, 32.81, -5.12), (55.49, 32.81, -3.52)),
    ]
    sheet_metal_1_3_5_to = [
        Edge.make_three_point_arc((55.49, 33.81, -3.52), (57.09, 33.81, -5.12), (55.49, 33.81, -6.72)),
        Edge.make_three_point_arc((55.49, 33.81, -6.72), (53.89, 33.81, -5.12), (55.49, 33.81, -3.52)),
    ]
    sheet_metal_1_3_5 = Solid(Shell([*[Face.make_surface_from_curves(sheet_metal_1_3_5_from[k], sheet_metal_1_3_5_to[k]) for k in range(2)], Face(Wire(sheet_metal_1_3_5_from)), Face(Wire(sheet_metal_1_3_5_to))]))
    add(sheet_metal_1_3_5, mode=Mode.SUBTRACT)

    # Sheet Metal 1 3 6: loft between two sections, ruled curve by curve
    sheet_metal_1_3_6_from = [
        Edge.make_three_point_arc((55.49, 32.81, -13.28), (57.09, 32.81, -14.88), (55.49, 32.81, -16.48)),
        Edge.make_three_point_arc((55.49, 32.81, -16.48), (53.89, 32.81, -14.88), (55.49, 32.81, -13.28)),
    ]
    sheet_metal_1_3_6_to = [
        Edge.make_three_point_arc((55.49, 33.81, -13.28), (57.09, 33.81, -14.88), (55.49, 33.81, -16.48)),
        Edge.make_three_point_arc((55.49, 33.81, -16.48), (53.89, 33.81, -14.88), (55.49, 33.81, -13.28)),
    ]
    sheet_metal_1_3_6 = Solid(Shell([*[Face.make_surface_from_curves(sheet_metal_1_3_6_from[k], sheet_metal_1_3_6_to[k]) for k in range(2)], Face(Wire(sheet_metal_1_3_6_from)), Face(Wire(sheet_metal_1_3_6_to))]))
    add(sheet_metal_1_3_6, mode=Mode.SUBTRACT)

    # Sheet Metal 1 3 7: loft between two sections, ruled curve by curve
    sheet_metal_1_3_7_from = [
        Edge.make_three_point_arc((1, 26.75, -8.4), (1, 28.35, -10), (1, 26.75, -11.6)),
        Edge.make_three_point_arc((1, 26.75, -11.6), (1, 25.15, -10), (1, 26.75, -8.4)),
    ]
    sheet_metal_1_3_7_to = [
        Edge.make_three_point_arc((0, 26.75, -8.4), (0, 28.35, -10), (0, 26.75, -11.6)),
        Edge.make_three_point_arc((0, 26.75, -11.6), (0, 25.15, -10), (0, 26.75, -8.4)),
    ]
    sheet_metal_1_3_7 = Solid(Shell([*[Face.make_surface_from_curves(sheet_metal_1_3_7_from[k], sheet_metal_1_3_7_to[k]) for k in range(2)], Face(Wire(sheet_metal_1_3_7_from)), Face(Wire(sheet_metal_1_3_7_to))]))
    add(sheet_metal_1_3_7, mode=Mode.SUBTRACT)

    # Sheet Metal 1 3 8: loft between two sections, ruled curve by curve
    sheet_metal_1_3_8_from = [
        Edge.make_three_point_arc((1, 19.75, -8.4), (1, 21.35, -10), (1, 19.75, -11.6)),
        Edge.make_three_point_arc((1, 19.75, -11.6), (1, 18.15, -10), (1, 19.75, -8.4)),
    ]
    sheet_metal_1_3_8_to = [
        Edge.make_three_point_arc((0, 19.75, -8.4), (0, 21.35, -10), (0, 19.75, -11.6)),
        Edge.make_three_point_arc((0, 19.75, -11.6), (0, 18.15, -10), (0, 19.75, -8.4)),
    ]
    sheet_metal_1_3_8 = Solid(Shell([*[Face.make_surface_from_curves(sheet_metal_1_3_8_from[k], sheet_metal_1_3_8_to[k]) for k in range(2)], Face(Wire(sheet_metal_1_3_8_from)), Face(Wire(sheet_metal_1_3_8_to))]))
    add(sheet_metal_1_3_8, mode=Mode.SUBTRACT)

    # Sheet Metal 1 3 9: loft between two sections, ruled curve by curve
    sheet_metal_1_3_9_from = [
        Edge.make_three_point_arc((1, 23.25, -15.4), (1, 24.85, -17), (1, 23.25, -18.6)),
        Edge.make_three_point_arc((1, 23.25, -18.6), (1, 21.65, -17), (1, 23.25, -15.4)),
    ]
    sheet_metal_1_3_9_to = [
        Edge.make_three_point_arc((0, 23.25, -15.4), (0, 24.85, -17), (0, 23.25, -18.6)),
        Edge.make_three_point_arc((0, 23.25, -18.6), (0, 21.65, -17), (0, 23.25, -15.4)),
    ]
    sheet_metal_1_3_9 = Solid(Shell([*[Face.make_surface_from_curves(sheet_metal_1_3_9_from[k], sheet_metal_1_3_9_to[k]) for k in range(2)], Face(Wire(sheet_metal_1_3_9_from)), Face(Wire(sheet_metal_1_3_9_to))]))
    add(sheet_metal_1_3_9, mode=Mode.SUBTRACT)

    # Sheet Metal 1 3 10: loft between two sections, ruled curve by curve
    sheet_metal_1_3_10_from = [
        Edge.make_three_point_arc((1, 23.25, -1.4), (1, 24.85, -3), (1, 23.25, -4.6)),
        Edge.make_three_point_arc((1, 23.25, -4.6), (1, 21.65, -3), (1, 23.25, -1.4)),
    ]
    sheet_metal_1_3_10_to = [
        Edge.make_three_point_arc((0, 23.25, -1.4), (0, 24.85, -3), (0, 23.25, -4.6)),
        Edge.make_three_point_arc((0, 23.25, -4.6), (0, 21.65, -3), (0, 23.25, -1.4)),
    ]
    sheet_metal_1_3_10 = Solid(Shell([*[Face.make_surface_from_curves(sheet_metal_1_3_10_from[k], sheet_metal_1_3_10_to[k]) for k in range(2)], Face(Wire(sheet_metal_1_3_10_from)), Face(Wire(sheet_metal_1_3_10_to))]))
    add(sheet_metal_1_3_10, mode=Mode.SUBTRACT)


solid = part.part
